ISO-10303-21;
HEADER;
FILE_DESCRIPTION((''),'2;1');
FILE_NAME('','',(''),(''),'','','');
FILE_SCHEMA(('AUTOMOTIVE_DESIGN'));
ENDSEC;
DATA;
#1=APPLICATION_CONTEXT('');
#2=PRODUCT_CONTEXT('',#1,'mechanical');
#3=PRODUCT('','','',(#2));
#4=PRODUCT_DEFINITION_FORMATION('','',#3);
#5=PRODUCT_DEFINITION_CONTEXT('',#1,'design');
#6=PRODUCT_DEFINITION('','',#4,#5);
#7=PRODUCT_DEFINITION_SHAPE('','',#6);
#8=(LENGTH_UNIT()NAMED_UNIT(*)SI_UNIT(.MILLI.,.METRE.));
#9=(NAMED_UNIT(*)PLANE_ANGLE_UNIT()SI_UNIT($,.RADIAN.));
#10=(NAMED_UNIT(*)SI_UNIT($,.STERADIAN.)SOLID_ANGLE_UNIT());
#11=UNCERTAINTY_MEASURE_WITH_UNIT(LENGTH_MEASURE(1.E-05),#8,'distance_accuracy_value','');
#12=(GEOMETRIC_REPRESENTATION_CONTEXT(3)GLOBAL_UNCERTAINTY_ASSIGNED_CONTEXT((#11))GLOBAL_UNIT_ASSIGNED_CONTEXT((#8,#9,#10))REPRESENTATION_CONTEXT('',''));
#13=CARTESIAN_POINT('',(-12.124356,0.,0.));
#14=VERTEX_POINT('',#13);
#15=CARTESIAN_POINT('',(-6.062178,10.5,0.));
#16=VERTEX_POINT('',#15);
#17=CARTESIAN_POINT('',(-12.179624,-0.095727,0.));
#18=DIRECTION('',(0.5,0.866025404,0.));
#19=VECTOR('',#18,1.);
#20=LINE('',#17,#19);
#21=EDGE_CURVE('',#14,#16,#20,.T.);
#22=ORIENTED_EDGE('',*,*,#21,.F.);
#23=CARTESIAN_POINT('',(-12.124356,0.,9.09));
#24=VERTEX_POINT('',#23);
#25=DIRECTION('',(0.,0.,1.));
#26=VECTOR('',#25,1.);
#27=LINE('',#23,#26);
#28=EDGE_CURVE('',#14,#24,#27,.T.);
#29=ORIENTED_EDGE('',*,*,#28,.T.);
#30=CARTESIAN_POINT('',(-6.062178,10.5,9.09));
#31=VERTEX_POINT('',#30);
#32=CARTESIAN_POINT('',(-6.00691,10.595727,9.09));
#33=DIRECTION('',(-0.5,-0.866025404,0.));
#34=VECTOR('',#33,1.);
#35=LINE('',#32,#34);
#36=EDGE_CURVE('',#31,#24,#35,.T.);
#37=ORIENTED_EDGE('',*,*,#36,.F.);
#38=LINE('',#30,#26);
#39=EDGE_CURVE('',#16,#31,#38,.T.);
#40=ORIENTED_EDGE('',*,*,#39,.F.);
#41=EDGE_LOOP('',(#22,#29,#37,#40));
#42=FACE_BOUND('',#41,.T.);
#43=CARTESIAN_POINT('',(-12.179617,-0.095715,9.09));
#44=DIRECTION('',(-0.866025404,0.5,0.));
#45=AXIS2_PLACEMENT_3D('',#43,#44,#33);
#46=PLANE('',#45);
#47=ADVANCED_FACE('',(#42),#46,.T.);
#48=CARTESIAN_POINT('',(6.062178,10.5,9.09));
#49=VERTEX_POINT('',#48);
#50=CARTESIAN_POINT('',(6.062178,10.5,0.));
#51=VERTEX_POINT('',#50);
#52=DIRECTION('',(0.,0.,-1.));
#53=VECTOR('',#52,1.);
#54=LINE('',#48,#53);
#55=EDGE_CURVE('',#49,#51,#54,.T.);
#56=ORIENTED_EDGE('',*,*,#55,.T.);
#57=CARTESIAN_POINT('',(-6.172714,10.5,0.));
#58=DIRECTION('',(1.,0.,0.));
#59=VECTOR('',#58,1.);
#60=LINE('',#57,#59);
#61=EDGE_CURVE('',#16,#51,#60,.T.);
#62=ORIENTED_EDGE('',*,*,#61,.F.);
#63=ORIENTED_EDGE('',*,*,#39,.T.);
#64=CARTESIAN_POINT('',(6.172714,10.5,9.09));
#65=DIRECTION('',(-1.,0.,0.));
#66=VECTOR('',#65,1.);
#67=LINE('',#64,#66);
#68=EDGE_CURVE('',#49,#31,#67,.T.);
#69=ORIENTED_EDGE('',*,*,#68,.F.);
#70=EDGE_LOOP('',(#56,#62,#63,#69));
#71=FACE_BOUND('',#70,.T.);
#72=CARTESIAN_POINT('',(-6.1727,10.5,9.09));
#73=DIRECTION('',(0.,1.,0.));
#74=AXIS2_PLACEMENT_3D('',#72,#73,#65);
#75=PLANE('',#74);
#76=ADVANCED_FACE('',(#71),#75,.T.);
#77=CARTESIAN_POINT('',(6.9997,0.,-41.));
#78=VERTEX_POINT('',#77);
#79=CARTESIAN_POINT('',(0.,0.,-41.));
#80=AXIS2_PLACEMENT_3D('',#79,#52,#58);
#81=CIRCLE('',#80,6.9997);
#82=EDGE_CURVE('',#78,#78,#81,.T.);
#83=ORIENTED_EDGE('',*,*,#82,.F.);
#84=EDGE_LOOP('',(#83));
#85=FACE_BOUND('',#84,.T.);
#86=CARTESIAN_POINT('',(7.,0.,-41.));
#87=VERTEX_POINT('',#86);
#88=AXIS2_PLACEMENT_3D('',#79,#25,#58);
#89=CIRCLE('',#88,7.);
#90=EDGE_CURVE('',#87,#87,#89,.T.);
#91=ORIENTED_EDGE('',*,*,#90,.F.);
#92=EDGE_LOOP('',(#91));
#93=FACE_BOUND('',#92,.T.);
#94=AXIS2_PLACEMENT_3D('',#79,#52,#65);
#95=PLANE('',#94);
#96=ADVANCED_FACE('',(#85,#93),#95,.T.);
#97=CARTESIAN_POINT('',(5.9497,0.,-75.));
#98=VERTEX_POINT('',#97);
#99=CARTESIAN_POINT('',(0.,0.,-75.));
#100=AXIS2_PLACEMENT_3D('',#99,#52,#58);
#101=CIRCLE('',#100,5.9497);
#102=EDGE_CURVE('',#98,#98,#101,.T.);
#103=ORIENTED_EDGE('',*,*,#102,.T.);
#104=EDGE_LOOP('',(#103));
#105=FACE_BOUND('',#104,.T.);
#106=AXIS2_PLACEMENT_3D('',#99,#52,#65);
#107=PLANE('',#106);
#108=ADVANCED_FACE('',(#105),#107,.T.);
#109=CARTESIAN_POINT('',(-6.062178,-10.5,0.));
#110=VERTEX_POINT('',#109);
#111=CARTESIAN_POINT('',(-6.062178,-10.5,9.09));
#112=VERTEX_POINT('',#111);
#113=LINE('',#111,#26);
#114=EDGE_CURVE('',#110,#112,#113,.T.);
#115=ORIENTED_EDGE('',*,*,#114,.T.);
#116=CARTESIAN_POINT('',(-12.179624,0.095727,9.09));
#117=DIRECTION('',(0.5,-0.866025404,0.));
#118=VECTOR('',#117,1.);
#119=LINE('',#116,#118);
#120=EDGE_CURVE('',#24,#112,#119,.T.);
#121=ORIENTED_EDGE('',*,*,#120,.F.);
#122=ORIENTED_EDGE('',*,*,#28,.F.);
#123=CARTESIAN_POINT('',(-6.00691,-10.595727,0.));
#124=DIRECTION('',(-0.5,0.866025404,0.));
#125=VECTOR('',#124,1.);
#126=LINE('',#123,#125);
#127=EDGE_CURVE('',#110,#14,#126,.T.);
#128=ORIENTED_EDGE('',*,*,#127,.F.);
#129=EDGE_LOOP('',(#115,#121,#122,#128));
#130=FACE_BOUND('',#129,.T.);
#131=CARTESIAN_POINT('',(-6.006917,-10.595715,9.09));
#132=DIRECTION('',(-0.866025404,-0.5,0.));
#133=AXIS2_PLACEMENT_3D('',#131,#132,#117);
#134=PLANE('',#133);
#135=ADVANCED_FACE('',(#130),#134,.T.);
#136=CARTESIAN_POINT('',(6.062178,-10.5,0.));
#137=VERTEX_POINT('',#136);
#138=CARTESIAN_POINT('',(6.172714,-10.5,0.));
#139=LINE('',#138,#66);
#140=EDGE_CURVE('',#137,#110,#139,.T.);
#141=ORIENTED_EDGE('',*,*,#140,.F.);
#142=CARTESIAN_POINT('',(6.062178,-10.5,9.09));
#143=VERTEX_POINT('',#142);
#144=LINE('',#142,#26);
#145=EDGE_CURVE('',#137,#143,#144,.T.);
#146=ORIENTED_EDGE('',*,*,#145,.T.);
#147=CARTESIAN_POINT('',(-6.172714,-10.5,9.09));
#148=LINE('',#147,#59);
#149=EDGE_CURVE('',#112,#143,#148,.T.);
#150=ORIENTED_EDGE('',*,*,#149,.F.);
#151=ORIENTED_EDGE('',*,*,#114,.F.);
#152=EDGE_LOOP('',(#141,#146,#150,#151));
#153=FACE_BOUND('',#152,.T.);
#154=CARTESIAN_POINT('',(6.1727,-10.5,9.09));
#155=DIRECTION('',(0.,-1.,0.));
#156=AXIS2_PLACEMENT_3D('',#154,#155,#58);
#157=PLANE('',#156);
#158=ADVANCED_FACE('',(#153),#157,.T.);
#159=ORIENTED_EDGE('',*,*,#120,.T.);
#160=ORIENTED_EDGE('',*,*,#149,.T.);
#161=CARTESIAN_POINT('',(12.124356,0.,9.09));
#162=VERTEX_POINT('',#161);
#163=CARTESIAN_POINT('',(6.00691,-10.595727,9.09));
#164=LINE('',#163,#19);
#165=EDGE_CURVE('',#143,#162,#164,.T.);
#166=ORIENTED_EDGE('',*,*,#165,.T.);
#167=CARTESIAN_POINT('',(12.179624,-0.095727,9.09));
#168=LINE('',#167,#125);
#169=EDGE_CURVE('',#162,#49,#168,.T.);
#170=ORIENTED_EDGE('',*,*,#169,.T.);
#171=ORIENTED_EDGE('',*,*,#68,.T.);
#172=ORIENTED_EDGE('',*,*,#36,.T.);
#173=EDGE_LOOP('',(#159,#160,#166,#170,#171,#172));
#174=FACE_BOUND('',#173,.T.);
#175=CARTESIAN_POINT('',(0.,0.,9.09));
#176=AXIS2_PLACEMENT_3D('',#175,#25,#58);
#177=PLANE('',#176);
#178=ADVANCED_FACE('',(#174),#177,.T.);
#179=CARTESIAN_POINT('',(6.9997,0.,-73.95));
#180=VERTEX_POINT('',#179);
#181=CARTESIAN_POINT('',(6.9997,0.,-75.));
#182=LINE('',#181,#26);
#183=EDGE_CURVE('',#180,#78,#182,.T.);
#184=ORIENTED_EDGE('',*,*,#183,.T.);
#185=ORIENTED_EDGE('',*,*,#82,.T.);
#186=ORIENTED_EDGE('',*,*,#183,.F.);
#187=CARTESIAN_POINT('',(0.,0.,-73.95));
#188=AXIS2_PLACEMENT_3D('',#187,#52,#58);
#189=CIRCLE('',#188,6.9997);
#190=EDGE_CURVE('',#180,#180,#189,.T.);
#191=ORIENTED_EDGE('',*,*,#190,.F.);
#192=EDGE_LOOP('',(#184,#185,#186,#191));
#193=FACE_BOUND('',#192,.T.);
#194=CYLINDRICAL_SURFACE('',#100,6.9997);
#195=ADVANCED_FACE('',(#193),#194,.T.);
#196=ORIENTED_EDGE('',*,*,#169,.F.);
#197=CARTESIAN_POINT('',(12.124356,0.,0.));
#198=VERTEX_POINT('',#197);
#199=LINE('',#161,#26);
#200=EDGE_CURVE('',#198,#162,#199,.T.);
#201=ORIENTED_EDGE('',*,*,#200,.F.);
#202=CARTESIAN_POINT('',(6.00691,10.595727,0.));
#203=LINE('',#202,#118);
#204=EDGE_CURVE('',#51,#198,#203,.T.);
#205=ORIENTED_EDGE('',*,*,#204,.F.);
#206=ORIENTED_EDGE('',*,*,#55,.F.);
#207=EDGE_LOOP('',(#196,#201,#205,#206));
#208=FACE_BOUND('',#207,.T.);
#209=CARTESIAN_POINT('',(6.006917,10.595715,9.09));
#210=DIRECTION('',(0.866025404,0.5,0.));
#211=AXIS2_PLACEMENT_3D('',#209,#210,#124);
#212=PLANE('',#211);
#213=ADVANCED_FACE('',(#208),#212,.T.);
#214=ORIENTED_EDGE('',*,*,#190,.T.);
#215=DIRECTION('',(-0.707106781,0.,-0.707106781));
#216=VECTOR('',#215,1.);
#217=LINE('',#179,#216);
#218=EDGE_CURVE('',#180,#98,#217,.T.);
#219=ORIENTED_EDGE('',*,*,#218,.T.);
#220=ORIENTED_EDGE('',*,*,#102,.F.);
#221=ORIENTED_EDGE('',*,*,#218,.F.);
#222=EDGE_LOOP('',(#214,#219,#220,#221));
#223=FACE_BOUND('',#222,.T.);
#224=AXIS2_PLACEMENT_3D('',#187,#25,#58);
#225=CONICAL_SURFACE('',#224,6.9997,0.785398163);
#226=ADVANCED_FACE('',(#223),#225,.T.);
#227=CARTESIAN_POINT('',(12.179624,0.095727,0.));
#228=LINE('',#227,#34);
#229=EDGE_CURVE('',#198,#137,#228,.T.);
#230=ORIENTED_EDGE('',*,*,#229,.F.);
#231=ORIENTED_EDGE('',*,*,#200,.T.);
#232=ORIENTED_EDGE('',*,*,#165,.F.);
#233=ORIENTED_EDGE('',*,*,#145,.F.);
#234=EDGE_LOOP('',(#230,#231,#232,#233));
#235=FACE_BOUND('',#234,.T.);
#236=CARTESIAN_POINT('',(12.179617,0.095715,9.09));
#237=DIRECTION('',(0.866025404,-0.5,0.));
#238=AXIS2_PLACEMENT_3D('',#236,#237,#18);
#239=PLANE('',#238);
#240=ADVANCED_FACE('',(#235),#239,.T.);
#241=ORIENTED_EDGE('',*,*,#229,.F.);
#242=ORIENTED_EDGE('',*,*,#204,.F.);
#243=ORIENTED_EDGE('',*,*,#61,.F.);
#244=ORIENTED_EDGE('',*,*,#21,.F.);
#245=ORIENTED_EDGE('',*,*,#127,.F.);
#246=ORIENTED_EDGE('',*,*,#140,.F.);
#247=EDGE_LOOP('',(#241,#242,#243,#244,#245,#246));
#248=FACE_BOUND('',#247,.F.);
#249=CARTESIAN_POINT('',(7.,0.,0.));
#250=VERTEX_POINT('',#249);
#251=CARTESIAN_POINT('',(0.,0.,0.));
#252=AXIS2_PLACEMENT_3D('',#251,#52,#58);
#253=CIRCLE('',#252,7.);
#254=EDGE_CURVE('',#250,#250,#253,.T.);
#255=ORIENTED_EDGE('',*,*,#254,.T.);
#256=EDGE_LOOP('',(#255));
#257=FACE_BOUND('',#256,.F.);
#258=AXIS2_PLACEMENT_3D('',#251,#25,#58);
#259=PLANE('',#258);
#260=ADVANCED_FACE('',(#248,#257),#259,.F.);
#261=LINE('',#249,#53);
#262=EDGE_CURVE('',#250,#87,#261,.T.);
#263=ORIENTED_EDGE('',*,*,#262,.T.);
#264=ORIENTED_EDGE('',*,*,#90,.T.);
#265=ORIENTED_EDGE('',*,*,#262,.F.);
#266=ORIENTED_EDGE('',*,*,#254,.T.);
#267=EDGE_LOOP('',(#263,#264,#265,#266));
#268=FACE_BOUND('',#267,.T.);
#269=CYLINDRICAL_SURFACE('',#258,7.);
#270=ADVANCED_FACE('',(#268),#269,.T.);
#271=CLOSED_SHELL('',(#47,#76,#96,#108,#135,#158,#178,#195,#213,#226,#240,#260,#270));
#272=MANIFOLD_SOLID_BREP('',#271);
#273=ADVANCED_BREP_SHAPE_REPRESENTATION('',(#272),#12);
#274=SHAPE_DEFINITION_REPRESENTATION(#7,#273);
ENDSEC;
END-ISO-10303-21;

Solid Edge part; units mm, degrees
sketch "Sketch1" plane through (0, 0, 0) normal (0, 0, 1) x (1, 0, 0)
  circle A0 centre (0, 0) radius 12.18
  dimension "D1" = 24.36
extrude "Protrusion1" add sketch "Sketch1" along normal blind 9.09
sketch "Sketch2" plane through (0, 0, 0) normal (0, 0, -1) x (1, 0, 0)
  circle A0 centre (0, 0) radius 7
extrude "Protrusion2" add sketch "Sketch2" along normal blind 75
sketch "Sketch3" plane through (0, 0, -75) normal (0, 0, -1) x (1, 0, 0)
  circle A0 centre (0, 0) radius 6.9997
extrude "Cutout1" cut sketch "Sketch3" against normal blind 34 flip side to cut
chamfer "Chamfer_1" distance 1.05 angle 45 1 edges at (-6.9997, 0, -75)
sketch "Sketch4" plane through (0, 0, 9.09) normal (0, 0, 1) x (1, 0, 0)
  line L0 (-6.1727, 10.5) -> (6.1727, 10.5)
  dimension "D1" = 21
extrude "Cutout2" cut sketch "Sketch4" against normal up to next material side at (0, 10.55, 9.09)
pattern_circular "Pattern1" count 6 over 360 about axis through (0, 0, 9.09) along (0, 0, 1) of "Cutout2"
properties part number "24101434"
